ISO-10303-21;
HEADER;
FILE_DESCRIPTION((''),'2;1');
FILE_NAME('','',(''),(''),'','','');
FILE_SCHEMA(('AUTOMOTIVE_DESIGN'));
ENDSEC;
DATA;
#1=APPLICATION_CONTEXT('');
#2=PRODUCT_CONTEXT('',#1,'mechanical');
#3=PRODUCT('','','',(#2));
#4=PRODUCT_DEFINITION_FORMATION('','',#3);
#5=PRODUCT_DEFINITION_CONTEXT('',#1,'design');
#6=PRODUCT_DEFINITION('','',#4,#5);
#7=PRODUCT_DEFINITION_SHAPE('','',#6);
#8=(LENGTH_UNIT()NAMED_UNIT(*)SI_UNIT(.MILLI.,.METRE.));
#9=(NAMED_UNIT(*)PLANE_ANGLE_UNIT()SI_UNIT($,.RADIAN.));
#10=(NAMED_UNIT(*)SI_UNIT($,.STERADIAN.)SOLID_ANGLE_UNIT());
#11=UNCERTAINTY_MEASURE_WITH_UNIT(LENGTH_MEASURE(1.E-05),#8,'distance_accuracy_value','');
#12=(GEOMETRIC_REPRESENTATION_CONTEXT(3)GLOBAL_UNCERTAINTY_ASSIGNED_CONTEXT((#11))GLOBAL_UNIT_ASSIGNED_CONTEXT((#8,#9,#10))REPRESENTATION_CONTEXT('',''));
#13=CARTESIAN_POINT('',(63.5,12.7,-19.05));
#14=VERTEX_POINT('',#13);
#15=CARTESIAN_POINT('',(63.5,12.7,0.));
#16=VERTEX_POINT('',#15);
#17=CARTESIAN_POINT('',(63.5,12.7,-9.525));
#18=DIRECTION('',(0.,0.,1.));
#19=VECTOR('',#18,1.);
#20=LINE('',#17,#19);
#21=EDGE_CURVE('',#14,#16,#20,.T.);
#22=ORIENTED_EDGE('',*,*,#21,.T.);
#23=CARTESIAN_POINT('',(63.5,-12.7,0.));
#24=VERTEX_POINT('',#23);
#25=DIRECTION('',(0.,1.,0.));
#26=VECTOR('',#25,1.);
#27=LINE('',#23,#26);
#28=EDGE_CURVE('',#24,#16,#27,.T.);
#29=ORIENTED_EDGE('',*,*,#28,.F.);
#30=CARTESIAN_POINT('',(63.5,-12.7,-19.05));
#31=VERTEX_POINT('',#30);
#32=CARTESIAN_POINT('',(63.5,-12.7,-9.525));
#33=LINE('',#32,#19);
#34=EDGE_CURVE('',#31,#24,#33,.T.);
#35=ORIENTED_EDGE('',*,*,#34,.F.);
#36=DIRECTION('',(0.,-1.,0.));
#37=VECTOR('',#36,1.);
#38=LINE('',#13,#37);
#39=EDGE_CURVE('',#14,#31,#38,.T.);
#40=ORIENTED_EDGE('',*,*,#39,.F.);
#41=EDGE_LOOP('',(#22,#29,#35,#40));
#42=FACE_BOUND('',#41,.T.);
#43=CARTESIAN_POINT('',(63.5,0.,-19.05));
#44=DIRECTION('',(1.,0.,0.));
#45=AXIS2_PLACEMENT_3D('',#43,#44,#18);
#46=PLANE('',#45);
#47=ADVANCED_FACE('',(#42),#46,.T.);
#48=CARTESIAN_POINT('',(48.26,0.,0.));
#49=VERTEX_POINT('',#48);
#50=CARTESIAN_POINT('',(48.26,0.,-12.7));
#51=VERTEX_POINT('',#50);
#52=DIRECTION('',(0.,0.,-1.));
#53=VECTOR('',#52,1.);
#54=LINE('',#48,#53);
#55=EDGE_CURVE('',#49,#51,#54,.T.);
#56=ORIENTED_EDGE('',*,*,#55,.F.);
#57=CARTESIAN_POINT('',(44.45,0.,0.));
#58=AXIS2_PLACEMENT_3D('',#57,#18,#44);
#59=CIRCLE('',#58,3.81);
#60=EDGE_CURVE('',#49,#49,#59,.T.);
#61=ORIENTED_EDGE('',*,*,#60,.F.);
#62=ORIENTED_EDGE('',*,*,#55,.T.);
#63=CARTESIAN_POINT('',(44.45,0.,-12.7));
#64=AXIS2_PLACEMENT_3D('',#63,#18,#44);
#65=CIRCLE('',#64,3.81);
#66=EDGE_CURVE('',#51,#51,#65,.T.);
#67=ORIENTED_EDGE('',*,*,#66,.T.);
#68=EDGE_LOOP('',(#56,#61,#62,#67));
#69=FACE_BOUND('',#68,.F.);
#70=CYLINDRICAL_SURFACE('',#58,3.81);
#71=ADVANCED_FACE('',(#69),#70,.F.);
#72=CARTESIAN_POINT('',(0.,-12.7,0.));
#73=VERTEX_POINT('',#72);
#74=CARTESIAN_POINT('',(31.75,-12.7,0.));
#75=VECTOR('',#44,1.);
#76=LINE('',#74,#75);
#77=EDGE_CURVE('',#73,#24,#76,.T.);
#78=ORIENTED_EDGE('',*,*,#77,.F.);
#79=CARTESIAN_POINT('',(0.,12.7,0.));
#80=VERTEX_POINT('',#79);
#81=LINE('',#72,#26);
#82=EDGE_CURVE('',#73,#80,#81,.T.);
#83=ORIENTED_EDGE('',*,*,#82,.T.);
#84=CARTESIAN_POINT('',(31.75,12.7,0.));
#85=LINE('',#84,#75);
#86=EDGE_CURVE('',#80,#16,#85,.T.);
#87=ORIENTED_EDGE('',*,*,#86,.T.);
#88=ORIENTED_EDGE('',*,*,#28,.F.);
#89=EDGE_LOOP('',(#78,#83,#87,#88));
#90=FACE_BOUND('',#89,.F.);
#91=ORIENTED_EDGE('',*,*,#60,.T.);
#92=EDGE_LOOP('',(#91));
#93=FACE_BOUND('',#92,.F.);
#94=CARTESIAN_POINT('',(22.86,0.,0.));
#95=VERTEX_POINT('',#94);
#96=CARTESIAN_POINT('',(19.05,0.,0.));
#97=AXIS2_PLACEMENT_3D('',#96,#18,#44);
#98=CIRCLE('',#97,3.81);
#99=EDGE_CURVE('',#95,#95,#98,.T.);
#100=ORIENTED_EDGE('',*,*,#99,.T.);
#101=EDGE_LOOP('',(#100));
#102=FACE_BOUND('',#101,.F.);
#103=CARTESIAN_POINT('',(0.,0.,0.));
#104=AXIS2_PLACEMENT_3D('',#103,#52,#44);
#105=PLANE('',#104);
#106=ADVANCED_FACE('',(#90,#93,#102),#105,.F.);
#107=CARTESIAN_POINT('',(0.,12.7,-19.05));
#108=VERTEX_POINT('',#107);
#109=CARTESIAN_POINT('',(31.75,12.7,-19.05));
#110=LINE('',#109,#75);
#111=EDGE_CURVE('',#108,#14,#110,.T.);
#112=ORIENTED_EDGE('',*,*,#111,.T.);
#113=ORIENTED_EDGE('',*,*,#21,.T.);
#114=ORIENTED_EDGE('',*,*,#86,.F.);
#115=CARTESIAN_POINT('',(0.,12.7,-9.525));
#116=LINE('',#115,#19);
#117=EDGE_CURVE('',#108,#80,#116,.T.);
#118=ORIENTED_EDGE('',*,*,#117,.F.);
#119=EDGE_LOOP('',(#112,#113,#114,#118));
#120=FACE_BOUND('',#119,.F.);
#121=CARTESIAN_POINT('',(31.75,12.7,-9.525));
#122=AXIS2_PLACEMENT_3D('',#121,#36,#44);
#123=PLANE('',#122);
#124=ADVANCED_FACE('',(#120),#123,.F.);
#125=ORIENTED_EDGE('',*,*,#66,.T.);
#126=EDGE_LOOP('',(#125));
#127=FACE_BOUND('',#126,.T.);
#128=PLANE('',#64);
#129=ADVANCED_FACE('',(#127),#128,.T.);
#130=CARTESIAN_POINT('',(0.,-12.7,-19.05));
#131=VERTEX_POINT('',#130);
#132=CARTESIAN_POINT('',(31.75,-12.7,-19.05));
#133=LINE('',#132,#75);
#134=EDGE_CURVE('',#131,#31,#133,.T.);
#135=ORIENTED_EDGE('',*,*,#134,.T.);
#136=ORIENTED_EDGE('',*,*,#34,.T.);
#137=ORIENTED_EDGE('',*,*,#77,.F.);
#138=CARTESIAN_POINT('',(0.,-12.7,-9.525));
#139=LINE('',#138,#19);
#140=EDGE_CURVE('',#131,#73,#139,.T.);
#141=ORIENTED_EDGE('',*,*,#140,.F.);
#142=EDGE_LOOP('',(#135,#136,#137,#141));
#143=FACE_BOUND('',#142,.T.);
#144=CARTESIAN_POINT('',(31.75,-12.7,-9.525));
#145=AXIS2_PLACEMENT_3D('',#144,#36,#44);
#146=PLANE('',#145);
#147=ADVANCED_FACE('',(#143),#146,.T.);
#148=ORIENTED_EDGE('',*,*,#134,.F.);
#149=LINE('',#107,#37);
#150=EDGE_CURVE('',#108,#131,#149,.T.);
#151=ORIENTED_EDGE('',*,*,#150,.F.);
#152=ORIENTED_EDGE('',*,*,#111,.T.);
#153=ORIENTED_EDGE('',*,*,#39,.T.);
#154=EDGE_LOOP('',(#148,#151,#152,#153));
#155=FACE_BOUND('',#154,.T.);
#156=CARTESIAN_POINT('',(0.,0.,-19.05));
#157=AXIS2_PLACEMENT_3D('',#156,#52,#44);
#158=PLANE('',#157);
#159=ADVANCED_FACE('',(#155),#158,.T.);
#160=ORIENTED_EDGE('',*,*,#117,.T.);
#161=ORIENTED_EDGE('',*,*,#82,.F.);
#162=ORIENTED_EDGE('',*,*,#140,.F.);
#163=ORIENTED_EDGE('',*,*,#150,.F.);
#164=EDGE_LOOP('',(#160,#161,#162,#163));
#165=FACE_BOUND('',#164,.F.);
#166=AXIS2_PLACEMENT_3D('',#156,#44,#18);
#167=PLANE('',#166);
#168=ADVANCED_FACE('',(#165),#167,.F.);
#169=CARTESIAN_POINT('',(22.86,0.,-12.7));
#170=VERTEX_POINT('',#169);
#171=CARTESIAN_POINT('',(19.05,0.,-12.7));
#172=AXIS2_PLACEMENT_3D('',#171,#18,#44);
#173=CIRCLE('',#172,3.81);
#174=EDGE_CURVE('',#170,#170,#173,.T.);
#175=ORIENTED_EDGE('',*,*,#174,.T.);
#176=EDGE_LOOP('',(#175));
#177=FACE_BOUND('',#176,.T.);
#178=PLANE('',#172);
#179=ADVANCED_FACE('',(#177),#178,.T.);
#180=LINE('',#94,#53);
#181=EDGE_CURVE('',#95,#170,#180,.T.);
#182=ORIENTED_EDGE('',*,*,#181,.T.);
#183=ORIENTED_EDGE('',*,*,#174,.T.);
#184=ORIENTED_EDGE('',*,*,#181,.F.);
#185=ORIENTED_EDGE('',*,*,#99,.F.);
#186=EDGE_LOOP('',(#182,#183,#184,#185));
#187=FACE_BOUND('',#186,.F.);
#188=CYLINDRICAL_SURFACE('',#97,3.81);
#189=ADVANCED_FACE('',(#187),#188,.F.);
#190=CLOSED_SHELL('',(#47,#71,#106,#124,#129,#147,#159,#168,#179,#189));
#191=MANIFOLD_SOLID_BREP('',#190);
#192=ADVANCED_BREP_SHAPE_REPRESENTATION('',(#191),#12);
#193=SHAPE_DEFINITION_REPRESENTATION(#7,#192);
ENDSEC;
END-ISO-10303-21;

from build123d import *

# Parameters (mm, degrees)
F0_W     = 63.5
F0_H     = 19.05
F1_DEPTH = 12.7
F2_R     = 3.81
F3_DEPTH = 12.7


# Not quite as in the source:
# - a feature names something its author has since deleted; it is built from what else it names


with BuildPart() as f1:
    # F0 (on Front) → F1 (new body, symmetric)
    with BuildSketch(Plane.XZ):
        with Locations((31.75, -9.525)):
            Rectangle(F0_W, F0_H)
    extrude(amount=F1_DEPTH, both=True)

    # F2 (on face) → F3 (cut)
    with BuildSketch(Plane.XY):
        with Locations((44.45, 0)):
            Circle(F2_R)
        with Locations((19.05, 0)):
            Circle(F2_R)
    extrude(amount=-F3_DEPTH, mode=Mode.SUBTRACT)


solid = f1.part
